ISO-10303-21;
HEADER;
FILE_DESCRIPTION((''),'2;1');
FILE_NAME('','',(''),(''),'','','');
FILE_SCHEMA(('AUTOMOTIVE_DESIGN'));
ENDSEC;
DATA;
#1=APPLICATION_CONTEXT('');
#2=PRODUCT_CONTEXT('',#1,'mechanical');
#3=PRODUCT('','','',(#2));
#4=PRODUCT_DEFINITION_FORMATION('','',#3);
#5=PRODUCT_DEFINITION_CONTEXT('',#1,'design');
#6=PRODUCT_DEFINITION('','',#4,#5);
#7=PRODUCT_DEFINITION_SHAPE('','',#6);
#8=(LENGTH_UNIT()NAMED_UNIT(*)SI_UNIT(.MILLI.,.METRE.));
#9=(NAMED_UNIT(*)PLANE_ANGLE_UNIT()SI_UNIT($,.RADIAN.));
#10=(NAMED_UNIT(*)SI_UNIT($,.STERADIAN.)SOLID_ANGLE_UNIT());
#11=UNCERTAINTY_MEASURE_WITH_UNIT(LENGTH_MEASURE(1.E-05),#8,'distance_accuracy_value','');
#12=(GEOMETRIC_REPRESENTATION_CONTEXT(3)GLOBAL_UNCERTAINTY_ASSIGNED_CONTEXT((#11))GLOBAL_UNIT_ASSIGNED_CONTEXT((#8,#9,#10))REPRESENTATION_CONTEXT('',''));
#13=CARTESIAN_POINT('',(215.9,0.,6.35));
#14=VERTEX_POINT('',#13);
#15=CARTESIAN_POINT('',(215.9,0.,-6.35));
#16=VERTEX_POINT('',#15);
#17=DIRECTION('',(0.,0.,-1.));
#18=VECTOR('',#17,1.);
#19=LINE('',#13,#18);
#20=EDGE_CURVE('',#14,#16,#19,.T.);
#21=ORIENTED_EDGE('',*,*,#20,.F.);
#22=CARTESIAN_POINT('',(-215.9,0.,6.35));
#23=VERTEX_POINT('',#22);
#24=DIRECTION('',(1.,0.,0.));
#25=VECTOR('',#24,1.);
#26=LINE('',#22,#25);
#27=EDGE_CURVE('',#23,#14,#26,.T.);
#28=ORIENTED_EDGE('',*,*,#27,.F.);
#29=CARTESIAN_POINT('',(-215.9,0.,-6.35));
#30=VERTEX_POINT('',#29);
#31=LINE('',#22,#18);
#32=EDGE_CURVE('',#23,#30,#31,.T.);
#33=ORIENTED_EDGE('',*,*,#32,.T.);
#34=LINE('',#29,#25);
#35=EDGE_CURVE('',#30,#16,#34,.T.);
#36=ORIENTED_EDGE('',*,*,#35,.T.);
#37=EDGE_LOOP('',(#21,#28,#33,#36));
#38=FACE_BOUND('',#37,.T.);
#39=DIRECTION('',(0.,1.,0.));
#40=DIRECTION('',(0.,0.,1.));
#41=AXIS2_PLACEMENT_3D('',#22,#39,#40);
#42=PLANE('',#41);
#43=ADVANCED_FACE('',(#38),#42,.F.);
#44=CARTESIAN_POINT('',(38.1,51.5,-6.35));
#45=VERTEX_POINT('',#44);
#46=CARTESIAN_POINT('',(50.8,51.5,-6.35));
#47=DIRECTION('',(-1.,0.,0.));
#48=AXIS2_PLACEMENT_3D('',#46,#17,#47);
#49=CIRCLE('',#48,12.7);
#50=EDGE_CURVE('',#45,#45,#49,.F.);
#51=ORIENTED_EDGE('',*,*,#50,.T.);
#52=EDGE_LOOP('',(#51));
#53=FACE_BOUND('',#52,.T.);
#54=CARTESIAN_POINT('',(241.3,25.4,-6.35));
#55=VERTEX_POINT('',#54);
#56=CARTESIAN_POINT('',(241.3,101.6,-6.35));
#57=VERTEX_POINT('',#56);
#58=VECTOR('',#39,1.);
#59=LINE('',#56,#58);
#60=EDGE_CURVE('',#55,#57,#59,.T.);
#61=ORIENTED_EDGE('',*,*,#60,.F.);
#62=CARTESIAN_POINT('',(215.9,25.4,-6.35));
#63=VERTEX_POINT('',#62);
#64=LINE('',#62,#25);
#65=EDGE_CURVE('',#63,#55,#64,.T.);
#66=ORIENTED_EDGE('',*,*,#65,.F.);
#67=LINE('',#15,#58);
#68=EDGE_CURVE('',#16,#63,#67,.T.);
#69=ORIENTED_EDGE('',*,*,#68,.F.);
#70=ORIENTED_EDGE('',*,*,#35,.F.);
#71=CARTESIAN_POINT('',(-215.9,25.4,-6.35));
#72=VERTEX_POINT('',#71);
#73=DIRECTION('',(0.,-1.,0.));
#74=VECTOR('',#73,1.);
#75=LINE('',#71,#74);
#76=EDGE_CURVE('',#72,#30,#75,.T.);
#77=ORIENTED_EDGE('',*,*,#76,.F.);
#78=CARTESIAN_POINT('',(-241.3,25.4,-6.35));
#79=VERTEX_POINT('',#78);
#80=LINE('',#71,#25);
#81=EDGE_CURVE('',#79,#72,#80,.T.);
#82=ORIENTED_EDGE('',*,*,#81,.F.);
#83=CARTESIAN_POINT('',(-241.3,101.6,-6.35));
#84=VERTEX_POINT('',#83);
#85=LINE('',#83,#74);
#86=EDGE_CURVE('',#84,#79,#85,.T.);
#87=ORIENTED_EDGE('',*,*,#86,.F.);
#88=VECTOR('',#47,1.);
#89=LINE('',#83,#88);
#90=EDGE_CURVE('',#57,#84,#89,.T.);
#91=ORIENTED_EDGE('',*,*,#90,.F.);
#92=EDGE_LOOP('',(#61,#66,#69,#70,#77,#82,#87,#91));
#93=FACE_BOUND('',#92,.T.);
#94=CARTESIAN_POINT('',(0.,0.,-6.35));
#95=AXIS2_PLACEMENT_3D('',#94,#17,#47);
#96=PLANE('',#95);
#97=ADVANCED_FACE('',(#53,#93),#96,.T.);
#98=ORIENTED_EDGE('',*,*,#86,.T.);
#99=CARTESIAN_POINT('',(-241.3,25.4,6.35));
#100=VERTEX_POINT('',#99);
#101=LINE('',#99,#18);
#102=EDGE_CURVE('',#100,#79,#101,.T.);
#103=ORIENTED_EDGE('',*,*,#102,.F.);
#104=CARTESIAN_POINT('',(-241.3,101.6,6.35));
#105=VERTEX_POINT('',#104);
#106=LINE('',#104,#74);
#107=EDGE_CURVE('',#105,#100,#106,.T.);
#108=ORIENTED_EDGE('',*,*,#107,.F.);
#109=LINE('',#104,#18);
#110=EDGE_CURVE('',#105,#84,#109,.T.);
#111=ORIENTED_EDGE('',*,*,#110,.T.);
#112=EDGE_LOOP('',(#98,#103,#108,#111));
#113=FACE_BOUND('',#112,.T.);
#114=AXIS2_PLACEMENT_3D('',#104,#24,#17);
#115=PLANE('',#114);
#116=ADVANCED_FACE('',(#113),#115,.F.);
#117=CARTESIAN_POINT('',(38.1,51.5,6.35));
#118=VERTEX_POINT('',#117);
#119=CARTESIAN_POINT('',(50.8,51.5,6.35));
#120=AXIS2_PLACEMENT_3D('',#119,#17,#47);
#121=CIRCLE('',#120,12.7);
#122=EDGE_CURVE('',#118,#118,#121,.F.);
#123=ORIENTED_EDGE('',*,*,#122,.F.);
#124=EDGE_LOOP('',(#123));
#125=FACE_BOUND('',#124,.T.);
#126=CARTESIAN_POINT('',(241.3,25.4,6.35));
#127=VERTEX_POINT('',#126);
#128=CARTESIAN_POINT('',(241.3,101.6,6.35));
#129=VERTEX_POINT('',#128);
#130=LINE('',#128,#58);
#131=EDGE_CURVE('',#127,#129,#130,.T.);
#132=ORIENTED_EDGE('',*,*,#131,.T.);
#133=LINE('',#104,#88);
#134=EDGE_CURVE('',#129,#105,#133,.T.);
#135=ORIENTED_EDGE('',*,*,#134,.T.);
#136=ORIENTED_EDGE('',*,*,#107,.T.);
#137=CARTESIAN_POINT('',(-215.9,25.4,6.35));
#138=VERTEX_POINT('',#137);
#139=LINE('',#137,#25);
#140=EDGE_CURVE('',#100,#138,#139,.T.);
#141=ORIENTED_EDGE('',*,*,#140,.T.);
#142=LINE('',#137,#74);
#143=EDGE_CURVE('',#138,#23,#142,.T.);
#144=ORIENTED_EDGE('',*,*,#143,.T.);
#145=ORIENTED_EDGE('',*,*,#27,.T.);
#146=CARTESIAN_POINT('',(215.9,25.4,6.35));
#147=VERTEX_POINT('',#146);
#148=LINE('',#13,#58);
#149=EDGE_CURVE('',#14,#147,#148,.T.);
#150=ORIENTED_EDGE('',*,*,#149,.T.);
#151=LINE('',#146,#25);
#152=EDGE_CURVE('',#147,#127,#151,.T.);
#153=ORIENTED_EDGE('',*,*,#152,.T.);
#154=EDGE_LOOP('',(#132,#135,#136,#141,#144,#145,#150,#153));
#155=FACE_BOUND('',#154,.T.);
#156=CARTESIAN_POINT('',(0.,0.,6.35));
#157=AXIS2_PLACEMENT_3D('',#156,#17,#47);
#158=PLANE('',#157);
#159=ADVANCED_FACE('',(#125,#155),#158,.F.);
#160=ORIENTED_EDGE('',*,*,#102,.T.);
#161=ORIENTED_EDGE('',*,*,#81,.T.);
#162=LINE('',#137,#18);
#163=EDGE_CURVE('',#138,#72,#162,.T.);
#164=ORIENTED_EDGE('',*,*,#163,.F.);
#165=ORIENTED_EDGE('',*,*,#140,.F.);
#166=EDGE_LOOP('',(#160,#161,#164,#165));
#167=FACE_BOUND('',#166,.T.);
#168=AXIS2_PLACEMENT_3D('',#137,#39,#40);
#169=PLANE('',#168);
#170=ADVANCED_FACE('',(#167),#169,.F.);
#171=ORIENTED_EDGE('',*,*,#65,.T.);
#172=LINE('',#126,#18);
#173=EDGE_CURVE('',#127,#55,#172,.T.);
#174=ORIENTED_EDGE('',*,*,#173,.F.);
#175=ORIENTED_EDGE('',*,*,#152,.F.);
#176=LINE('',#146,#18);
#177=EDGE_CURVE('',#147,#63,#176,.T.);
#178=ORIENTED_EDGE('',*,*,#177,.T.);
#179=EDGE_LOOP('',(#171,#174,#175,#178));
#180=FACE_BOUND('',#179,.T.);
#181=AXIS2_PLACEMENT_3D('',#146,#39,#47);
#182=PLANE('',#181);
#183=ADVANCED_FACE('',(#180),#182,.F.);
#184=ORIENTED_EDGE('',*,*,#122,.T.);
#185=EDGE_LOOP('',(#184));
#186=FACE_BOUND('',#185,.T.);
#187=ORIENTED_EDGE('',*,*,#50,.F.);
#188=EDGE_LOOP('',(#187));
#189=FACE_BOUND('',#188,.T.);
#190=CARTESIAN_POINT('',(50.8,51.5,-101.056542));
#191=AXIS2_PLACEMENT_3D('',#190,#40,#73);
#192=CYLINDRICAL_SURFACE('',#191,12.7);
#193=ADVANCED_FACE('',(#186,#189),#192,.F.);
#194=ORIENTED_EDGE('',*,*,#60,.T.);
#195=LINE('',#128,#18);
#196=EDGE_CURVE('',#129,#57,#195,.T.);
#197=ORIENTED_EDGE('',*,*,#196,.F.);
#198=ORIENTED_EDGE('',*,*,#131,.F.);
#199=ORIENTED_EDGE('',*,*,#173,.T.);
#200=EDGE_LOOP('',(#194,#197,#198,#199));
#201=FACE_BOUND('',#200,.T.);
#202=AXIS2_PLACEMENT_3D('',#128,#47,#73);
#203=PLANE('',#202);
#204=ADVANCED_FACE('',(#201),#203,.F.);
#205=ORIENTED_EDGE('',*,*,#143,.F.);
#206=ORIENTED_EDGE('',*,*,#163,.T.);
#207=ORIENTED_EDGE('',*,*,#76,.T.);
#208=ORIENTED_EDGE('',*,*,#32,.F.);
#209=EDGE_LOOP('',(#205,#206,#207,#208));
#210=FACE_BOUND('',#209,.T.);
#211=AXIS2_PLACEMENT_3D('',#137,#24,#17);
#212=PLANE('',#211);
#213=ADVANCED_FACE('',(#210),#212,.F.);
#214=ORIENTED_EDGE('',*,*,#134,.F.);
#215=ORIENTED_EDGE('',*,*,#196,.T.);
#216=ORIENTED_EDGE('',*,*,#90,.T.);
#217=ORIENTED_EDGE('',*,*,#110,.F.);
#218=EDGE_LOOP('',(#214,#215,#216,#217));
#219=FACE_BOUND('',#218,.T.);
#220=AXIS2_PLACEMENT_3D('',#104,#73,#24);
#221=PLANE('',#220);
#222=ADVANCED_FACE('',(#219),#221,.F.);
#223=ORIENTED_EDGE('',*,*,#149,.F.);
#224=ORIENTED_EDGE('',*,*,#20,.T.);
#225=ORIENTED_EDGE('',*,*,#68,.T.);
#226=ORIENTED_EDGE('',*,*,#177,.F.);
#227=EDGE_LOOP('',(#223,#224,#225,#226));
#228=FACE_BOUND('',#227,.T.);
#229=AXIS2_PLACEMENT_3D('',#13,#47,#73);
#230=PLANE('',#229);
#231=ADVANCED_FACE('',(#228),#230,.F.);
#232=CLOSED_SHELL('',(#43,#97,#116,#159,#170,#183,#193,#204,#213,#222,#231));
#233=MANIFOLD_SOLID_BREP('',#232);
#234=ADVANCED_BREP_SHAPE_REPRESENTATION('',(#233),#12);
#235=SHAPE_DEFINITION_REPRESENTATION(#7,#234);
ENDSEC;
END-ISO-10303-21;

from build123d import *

# Parameters (mm, degrees)
BOSS_EXTRUDE1_DEPTH = 6.35
CAVITY1_START       = -6.35
CAVITY1_OUTLINE_R   = 12.7
CAVITY1_DEPTH       = 12.7


# Read off the part's stored shape, not the designer's step: Cavity1
with BuildPart() as part:
    # Sketch1 → Boss-Extrude1 (new, symmetric)
    with BuildSketch(Plane.XY):
        Polygon((-215.9, 0), (215.9, 0), (215.9, 25.4), (241.3, 25.4), (241.3, 101.6), (-241.3, 101.6), (-241.3, 25.4), (-215.9, 25.4), align=None)
    extrude(amount=BOSS_EXTRUDE1_DEPTH, both=True)

    # Cavity1 outline → Cavity1 (cut)
    with BuildSketch(Plane.XY.offset(CAVITY1_START)):
        with Locations((50.8, 51.5)):
            Circle(CAVITY1_OUTLINE_R)
    extrude(amount=CAVITY1_DEPTH, mode=Mode.SUBTRACT)


solid = part.part
